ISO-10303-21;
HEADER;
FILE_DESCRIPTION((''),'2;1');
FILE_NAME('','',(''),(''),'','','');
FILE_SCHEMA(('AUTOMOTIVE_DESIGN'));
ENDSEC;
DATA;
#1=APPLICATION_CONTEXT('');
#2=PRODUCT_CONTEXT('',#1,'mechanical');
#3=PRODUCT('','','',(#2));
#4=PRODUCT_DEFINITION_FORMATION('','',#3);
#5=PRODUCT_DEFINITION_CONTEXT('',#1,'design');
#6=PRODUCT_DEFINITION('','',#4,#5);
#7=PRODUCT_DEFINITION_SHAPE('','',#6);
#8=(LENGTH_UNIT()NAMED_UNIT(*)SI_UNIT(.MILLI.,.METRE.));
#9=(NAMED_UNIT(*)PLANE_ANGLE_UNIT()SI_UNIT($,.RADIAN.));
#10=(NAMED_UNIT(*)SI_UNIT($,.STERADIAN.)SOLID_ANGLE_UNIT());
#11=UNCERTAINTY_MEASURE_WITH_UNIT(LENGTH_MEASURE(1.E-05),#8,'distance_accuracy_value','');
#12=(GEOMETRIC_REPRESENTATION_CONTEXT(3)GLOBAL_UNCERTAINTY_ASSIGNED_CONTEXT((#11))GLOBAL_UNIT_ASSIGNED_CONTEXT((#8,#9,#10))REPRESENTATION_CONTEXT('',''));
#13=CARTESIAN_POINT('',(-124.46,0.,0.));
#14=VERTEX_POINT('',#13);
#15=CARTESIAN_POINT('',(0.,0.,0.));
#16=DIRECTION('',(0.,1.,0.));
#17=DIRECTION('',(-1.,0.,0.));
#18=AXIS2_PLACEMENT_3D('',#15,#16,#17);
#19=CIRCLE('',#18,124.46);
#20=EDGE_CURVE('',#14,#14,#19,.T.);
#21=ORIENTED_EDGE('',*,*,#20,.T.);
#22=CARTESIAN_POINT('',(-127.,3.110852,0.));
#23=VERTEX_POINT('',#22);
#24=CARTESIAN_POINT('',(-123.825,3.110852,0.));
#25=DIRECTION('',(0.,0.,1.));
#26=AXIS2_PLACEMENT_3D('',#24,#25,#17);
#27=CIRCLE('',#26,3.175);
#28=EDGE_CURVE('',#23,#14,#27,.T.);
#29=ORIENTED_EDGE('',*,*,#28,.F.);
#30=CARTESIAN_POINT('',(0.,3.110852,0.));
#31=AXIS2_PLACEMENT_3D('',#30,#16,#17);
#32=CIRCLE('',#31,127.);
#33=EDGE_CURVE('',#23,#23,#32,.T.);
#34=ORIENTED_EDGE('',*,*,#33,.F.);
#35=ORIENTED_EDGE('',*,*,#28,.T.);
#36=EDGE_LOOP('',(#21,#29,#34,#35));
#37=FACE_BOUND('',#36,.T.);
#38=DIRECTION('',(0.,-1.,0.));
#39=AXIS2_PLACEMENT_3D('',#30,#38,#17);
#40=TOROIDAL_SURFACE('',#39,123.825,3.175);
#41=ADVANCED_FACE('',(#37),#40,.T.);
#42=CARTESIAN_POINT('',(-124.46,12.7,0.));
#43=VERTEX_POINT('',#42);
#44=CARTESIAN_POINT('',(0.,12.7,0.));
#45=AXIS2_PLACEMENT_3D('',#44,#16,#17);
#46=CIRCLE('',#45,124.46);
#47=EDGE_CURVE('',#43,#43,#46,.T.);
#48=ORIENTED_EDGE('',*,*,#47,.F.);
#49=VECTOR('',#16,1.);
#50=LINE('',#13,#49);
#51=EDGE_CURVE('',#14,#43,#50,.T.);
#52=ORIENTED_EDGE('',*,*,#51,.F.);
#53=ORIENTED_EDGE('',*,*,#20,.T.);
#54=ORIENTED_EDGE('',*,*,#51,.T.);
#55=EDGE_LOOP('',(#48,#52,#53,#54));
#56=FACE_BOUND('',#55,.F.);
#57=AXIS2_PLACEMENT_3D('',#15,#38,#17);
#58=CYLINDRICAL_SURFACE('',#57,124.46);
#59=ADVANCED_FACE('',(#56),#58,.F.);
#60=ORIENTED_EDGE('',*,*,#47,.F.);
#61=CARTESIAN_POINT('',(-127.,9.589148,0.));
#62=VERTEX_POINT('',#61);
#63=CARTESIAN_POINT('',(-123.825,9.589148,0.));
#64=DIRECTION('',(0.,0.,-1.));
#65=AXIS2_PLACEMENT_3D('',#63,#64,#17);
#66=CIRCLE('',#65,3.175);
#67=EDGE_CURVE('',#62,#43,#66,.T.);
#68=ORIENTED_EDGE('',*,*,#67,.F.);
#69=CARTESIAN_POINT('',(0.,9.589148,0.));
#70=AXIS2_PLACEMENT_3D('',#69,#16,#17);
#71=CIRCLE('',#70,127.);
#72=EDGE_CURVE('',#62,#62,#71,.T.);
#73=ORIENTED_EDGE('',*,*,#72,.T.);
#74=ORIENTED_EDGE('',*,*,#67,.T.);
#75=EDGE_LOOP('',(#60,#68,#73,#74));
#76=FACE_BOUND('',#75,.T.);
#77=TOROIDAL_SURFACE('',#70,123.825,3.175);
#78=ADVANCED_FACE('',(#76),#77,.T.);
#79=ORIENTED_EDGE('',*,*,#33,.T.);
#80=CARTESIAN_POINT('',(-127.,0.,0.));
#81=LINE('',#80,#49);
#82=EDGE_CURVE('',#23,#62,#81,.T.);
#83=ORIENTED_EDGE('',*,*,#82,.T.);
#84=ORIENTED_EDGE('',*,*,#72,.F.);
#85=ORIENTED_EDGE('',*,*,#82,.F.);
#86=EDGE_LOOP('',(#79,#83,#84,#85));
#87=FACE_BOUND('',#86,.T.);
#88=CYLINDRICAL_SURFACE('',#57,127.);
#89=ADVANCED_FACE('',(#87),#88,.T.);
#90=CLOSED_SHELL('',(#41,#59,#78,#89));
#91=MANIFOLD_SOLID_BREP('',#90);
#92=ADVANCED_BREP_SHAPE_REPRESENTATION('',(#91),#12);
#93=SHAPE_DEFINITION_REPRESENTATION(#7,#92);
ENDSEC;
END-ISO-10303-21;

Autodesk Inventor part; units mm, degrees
ref_plane "YZ Plane" through (0, 0, 0) normal (1, 0, 0) x (0, 1, 0)
ref_plane "XZ Plane" through (0, 0, 0) normal (0, 1, 0) x (-1, 0, 0)
ref_plane "XY Plane" through (0, 0, 0) normal (0, 0, 1) x (1, 0, 0)
sketch "Sketch1" plane through (0, 0, 0) normal (0, 1, 0) x (-1, 0, 0)
  circle A0 centre (0, 0) radius 124.46
  circle A1 centre (0, 0) radius 127
  dimension "d0" = 248.92
  dimension "d1" = 254
extrude "Extrusion1" add sketch "Sketch1" along normal blind 12.7
fillet "Fillet1" radius 3.175 1 edges at (127, 12.7, 0)
fillet "Fillet2" radius 3.175 1 edges at (127, 0, 0)
properties part number "Prop_Ring"
